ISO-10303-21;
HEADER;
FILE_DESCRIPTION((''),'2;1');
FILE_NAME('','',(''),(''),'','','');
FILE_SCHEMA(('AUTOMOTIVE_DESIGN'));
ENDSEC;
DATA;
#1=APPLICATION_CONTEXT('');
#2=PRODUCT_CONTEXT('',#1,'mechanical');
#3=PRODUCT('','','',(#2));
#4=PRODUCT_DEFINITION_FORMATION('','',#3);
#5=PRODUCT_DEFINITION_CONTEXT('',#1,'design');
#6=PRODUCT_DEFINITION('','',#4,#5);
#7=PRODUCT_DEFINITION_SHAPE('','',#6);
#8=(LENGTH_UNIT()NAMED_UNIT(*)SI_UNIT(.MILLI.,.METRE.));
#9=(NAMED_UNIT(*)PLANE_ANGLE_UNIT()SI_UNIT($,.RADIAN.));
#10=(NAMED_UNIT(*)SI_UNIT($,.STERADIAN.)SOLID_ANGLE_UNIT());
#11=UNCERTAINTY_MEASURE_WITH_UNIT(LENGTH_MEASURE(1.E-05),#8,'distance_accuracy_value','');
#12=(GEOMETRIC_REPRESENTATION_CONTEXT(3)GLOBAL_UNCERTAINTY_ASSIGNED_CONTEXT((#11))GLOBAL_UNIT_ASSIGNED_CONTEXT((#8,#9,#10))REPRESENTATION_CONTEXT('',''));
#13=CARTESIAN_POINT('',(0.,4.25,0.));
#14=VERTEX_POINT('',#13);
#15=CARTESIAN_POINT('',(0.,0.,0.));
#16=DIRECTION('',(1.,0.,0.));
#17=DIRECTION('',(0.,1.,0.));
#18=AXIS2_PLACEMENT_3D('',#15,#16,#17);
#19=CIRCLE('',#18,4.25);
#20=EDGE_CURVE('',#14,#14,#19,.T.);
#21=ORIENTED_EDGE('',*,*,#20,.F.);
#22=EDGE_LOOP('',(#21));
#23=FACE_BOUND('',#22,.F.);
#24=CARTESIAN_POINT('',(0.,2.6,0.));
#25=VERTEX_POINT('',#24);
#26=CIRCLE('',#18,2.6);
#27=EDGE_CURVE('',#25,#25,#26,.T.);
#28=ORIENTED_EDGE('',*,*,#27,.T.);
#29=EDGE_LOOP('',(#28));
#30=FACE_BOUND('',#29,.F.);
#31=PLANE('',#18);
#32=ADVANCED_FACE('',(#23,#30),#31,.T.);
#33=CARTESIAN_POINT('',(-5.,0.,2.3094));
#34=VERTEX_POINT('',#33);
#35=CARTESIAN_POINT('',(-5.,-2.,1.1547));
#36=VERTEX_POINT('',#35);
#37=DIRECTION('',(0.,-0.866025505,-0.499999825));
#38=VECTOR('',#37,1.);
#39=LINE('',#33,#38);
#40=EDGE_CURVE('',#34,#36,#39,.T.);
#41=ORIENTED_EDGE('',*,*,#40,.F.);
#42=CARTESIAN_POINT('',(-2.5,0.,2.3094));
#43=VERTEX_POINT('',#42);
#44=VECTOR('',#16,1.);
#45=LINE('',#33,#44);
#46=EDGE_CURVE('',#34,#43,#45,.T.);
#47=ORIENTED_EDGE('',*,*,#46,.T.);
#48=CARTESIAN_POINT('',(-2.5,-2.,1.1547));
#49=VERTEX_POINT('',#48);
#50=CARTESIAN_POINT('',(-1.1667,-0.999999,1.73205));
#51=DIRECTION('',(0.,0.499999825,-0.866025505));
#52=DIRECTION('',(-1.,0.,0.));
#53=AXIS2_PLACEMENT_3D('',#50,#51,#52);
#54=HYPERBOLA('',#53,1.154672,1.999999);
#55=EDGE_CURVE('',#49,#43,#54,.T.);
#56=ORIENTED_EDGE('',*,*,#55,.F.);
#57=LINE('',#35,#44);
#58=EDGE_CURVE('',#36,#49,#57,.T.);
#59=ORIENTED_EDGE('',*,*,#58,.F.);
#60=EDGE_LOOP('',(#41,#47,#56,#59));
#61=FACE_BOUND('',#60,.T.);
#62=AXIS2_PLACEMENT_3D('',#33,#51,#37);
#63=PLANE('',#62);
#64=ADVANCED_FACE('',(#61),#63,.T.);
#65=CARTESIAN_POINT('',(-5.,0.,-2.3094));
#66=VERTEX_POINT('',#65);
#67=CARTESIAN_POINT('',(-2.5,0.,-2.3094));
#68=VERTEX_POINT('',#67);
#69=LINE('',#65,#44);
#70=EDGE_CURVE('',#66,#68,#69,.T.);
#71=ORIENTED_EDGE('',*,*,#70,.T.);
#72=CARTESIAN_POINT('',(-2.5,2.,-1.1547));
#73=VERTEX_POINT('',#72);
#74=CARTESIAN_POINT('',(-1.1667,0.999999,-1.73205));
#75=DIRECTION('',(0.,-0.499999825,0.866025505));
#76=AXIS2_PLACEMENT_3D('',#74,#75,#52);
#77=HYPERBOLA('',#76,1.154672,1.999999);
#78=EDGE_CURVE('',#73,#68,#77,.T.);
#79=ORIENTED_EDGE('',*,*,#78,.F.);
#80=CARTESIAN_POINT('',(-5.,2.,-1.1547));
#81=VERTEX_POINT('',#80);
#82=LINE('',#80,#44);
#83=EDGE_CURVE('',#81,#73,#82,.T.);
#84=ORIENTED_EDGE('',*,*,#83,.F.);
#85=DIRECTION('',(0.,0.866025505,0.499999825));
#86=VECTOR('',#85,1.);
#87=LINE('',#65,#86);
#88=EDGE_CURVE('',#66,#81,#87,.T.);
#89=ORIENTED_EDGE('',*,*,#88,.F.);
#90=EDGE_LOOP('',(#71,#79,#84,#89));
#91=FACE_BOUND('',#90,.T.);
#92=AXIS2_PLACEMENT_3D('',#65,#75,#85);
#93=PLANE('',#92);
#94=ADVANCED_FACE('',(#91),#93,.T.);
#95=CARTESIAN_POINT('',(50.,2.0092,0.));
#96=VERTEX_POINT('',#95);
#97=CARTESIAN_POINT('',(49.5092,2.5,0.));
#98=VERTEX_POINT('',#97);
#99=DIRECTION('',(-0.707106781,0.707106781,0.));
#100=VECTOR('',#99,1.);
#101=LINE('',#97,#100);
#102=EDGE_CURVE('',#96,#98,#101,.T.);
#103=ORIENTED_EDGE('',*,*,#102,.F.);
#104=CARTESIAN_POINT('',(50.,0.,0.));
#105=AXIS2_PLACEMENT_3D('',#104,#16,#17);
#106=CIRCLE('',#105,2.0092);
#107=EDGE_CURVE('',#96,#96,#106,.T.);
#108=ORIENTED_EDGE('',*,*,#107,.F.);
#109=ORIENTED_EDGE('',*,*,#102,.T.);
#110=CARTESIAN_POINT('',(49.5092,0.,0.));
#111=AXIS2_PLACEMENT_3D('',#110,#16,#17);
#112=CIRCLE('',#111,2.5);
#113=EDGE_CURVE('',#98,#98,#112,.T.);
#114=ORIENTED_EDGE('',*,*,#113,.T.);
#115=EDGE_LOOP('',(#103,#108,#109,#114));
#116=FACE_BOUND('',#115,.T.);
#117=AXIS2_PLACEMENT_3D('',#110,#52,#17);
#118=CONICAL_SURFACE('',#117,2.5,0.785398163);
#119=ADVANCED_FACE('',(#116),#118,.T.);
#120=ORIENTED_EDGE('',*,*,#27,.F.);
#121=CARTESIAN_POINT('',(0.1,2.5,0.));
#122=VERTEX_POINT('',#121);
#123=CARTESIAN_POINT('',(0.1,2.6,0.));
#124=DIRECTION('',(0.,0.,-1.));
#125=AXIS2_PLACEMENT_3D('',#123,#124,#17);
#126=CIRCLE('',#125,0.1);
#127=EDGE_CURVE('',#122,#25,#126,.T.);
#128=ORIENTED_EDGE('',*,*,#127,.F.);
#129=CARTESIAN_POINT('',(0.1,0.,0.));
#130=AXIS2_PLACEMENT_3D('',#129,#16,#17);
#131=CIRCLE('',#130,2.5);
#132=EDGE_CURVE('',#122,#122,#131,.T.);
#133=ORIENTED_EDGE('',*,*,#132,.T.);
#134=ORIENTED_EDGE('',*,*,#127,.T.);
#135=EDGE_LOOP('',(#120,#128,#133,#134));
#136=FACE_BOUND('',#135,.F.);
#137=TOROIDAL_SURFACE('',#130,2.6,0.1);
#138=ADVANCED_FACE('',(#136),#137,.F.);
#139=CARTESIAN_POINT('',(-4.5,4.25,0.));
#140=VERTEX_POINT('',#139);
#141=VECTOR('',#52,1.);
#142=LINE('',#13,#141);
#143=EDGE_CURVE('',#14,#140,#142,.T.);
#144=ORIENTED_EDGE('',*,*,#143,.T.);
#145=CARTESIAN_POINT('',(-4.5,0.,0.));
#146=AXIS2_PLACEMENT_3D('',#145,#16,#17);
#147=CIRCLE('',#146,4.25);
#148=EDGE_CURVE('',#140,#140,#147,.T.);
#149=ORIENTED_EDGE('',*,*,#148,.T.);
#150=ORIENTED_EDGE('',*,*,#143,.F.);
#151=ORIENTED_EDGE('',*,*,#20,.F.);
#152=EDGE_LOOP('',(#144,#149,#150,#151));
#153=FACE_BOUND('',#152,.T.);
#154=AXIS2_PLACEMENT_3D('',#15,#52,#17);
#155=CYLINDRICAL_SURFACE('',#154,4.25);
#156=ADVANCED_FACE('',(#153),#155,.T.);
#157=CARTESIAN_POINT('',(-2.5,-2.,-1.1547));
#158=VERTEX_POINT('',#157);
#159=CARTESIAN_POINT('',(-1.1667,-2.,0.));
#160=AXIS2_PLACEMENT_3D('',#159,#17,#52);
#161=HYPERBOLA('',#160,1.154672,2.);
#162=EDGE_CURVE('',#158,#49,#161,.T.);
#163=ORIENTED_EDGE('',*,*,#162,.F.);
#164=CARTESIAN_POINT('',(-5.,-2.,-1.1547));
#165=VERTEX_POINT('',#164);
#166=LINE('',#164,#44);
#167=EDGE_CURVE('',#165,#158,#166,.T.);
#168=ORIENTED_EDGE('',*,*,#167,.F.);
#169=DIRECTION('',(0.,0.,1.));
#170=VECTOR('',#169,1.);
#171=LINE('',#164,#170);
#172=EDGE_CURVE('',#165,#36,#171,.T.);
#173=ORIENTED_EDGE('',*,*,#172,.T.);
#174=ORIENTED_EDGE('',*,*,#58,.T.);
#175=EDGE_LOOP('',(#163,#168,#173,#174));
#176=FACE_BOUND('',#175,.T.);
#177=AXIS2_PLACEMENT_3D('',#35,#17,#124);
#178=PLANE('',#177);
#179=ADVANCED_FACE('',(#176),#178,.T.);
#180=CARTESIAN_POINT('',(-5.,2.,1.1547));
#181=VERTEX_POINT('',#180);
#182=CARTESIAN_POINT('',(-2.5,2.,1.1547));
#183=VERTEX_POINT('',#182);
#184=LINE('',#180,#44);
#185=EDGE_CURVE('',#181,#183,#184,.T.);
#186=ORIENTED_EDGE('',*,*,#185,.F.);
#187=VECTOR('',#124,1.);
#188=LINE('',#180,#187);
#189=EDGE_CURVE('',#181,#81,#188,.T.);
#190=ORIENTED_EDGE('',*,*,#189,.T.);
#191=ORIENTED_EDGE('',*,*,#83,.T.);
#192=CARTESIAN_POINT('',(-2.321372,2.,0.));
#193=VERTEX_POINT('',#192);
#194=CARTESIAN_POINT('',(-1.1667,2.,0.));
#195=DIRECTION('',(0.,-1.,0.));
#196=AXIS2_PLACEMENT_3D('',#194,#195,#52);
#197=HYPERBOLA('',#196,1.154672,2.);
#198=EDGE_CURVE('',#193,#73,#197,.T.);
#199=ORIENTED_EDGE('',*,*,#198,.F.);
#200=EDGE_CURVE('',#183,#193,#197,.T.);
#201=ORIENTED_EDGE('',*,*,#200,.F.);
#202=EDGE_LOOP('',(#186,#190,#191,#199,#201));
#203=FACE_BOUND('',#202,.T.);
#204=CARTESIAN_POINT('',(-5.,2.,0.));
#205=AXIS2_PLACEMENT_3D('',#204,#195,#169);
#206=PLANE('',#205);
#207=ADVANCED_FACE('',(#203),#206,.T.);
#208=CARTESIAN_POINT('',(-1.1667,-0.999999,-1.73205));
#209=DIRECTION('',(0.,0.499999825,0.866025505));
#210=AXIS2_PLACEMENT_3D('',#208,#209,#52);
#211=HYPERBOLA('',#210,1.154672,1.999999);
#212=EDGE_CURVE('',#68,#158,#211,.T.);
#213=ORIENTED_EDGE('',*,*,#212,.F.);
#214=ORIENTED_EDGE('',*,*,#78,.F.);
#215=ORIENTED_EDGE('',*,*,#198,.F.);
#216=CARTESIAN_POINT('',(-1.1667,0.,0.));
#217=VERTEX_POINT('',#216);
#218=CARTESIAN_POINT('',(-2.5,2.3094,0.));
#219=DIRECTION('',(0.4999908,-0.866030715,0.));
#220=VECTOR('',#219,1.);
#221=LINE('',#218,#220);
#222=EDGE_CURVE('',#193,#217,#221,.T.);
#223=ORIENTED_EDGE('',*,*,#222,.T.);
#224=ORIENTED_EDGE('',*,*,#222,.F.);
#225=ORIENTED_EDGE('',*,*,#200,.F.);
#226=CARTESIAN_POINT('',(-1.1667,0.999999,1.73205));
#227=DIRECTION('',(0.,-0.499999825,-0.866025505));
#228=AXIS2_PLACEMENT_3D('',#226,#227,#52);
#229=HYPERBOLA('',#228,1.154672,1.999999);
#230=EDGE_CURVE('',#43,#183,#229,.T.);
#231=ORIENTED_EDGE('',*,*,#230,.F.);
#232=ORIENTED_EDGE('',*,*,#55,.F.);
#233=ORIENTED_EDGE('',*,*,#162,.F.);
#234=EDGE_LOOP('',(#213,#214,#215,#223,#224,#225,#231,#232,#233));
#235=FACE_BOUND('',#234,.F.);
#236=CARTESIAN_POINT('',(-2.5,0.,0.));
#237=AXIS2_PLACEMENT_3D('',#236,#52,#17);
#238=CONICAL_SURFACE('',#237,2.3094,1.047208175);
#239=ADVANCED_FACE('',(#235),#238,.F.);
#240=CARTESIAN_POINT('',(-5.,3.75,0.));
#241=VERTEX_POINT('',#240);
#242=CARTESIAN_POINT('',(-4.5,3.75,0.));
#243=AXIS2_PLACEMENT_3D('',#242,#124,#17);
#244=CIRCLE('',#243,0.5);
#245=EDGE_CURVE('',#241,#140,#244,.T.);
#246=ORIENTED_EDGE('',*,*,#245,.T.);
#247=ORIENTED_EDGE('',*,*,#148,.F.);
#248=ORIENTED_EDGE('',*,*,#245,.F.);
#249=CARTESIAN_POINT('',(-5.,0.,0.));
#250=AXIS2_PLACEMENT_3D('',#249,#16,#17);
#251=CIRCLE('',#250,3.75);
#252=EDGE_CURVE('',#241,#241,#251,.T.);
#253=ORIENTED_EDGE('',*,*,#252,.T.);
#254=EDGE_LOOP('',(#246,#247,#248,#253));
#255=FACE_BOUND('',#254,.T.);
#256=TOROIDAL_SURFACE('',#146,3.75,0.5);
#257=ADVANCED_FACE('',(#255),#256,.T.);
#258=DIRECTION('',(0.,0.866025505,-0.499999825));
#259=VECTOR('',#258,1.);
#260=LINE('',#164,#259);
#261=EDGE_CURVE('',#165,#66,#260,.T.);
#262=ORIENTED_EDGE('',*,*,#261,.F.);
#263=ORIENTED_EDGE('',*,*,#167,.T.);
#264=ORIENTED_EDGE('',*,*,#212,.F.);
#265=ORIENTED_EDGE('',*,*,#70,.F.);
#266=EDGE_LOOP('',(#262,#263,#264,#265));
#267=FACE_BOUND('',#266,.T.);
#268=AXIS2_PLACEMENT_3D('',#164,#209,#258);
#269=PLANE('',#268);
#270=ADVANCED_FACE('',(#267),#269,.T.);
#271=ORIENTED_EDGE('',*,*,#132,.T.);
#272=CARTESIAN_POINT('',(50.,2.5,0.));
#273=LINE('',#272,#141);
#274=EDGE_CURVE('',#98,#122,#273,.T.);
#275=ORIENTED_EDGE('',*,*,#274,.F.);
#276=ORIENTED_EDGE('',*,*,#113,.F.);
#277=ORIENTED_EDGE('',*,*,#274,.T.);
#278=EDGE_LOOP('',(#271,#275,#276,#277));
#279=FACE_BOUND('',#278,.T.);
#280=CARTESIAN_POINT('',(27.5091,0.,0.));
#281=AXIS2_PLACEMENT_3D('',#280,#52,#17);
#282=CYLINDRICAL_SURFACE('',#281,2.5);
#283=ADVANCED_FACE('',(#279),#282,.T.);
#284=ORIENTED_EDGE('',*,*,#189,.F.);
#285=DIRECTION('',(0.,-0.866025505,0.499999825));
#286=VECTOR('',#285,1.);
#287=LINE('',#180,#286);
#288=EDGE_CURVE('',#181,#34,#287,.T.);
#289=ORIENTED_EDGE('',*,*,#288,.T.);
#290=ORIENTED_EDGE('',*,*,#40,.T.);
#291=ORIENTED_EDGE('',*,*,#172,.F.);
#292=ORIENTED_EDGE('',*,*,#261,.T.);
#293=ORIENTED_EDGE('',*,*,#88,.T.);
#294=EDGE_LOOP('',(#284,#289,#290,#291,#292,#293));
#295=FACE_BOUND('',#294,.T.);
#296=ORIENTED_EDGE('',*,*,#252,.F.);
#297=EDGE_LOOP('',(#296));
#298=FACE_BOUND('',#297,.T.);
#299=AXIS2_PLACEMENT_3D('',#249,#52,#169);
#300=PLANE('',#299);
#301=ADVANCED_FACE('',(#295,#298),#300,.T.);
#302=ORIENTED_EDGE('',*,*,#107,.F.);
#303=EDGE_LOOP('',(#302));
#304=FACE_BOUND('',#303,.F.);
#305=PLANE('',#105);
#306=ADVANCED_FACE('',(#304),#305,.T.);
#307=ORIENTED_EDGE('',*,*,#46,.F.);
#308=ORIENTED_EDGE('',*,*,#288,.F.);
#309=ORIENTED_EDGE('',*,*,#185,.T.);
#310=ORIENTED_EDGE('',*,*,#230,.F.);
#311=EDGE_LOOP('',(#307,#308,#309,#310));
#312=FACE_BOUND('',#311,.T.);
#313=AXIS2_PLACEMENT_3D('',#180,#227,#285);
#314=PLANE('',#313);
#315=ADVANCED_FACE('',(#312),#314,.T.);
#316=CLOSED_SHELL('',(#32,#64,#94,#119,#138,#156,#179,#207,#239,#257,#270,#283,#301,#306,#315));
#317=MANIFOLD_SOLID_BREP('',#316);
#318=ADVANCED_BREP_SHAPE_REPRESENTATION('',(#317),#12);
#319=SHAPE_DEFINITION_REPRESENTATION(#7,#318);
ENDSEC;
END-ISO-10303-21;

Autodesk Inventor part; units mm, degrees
ref_plane "YZ Plane" through (0, 0, 0) normal (1, 0, 0) x (0, 1, 0)
ref_plane "XZ Plane" through (0, 0, 0) normal (0, 1, 0) x (-1, 0, 0)
sketch "Skizze1" plane through (0, 0, 0) normal (0, 0, 1) x (1, 0, 0)
  line L0 (-1.1667, 0) -> (50, 0)
  line L1 (50, 0) -> (50, 2.5)
  line L2 (50, 2.5) -> (28, 2.5)
  line L3 (28, 2.5) -> (27.5091, 2.5)
  line L4 (27.5091, 2.5) -> (0, 2.5)
  line L5 (0, 2.5) -> (0, 4.25)
  line L6 (0, 4.25) -> (-5, 4.25)
  line L7 (-5, 4.25) -> (-5, 2.3094)
  line L8 (-5, 2.3094) -> (-2.5, 2.3094)
  line L9 (-2.5, 2.3094) -> (-1.1667, 0)
  line L10 (-16, 0) -> (61, 0) projected
  line L11 (0, -0.85) -> (0, 5.1) projected
  line L12 (28, 2.5) -> (0, 2.5) construction
  dimension "d1" = 22
  dimension "d2" = 0.4909
  dimension "d3" = 5
  dimension "d4" = 2.5
  dimension "d5" = 60
  dimension "d6" = 5
  dimension "d7" = 5
  dimension "d8" = 4.6188
  dimension "d9" = 8.5
  dimension "d26" = 50
revolve "Körper" add sketch "Skizze1" angle 360 about axis through (-1.1667, 0, 0) along (1, 0, 0)
sketch "Skizze2" plane through (-5, 0, 0) normal (-1, 0, 0) x (0, 0, 1)
  circle A0 centre (0, 0) radius 2.3094 projected
  line L0 (0, -5.95) -> (0, 5.95) projected
  line L1 (-5.95, 0) -> (5.95, 0) projected
  line L2 (2.3094, 0) -> (1.1547, -2)
  line L3 (1.1547, -2) -> (-1.1547, -2)
  line L4 (-1.1547, -2) -> (-2.3094, 0)
  line L5 (-2.3094, 0) -> (-1.1547, 2)
  line L6 (-1.1547, 2) -> (1.1547, 2)
  line L7 (1.1547, 2) -> (2.3094, 0)
extrude "Loch" add sketch "Skizze2" against normal up to next contours L7 A0 | A0 L2 | L6 L0 A0 | A0 L0 L3 | L0 L6 A0 | A0 L3 L0 | L4 A0 | A0 L5
fillet "Rundung1" radius 0.5 1 edges at (-5, -4.25, 0)
thread "Gewinde" size "M5x0.8" class "6g" standard "ISO Metric profile" length 22
chamfer "Fase1" distance 0.4908 distance2 0.4908 1 edges at (50, -2.5, 0) measured on face at (50, -0.1004, 0.8273)
ref_plane "Work Plane1" through (29, 0, 0) normal (0, -1, 0) x (1, 0, 0)
fillet "Fillet2" radius 0.1 1 edges at (0, -2.5, 0)
equation "\"d30\" = R"
equation "\"d17\" = RR"
equation "\"d13\" = GEL"
equation "\"d15\" = -0.5 * SPD + 0.5 * GD"
equation "\"d16\" = GUL"
equation "\"d1\" = GEL"
equation "\"d3\" = KOH"
equation "\"d4\" = INTI"
equation "\"d6\" = GD"
equation "\"d7\" = BDM"
equation "\"d8\" = 1.1547 * SW"
equation "\"d9\" = KOD"
equation "\"d26\" = NLG"
equation "\"GD\" = 5"
equation "\"NLG\" = 50"
equation "\"GEL\" = 22"
equation "\"KOD\" = 8.5"
equation "\"KOH\" = 5"
equation "\"INTI\" = 2.5"
equation "\"GAL\" = 0.61345 * PTC"
equation "\"GUL\" = 0.61345 * PTC"
equation "\"BDM\" = NND"
equation "\"SW\" = 4"
equation "\"RR\" = 0.5"
equation "\"SPD\" = NND - 1.2269 * PTC"
equation "\"R\" = 0.1"
equation "\"TOA\" = 30deg"
equation "\"GD1\" = THREADDIA - 1.2269 * PTC"
equation "\"THREADDIA\" = 5"
equation "\"FAWI\" = 45deg"
equation "\"PTC\" = 0.8"
equation "\"NND\" = 5"
equation "\"E0\" = 1.155 * SW"
properties part number "ISO 4762 - M5 x 50" material "Edelstahl, 440C"
